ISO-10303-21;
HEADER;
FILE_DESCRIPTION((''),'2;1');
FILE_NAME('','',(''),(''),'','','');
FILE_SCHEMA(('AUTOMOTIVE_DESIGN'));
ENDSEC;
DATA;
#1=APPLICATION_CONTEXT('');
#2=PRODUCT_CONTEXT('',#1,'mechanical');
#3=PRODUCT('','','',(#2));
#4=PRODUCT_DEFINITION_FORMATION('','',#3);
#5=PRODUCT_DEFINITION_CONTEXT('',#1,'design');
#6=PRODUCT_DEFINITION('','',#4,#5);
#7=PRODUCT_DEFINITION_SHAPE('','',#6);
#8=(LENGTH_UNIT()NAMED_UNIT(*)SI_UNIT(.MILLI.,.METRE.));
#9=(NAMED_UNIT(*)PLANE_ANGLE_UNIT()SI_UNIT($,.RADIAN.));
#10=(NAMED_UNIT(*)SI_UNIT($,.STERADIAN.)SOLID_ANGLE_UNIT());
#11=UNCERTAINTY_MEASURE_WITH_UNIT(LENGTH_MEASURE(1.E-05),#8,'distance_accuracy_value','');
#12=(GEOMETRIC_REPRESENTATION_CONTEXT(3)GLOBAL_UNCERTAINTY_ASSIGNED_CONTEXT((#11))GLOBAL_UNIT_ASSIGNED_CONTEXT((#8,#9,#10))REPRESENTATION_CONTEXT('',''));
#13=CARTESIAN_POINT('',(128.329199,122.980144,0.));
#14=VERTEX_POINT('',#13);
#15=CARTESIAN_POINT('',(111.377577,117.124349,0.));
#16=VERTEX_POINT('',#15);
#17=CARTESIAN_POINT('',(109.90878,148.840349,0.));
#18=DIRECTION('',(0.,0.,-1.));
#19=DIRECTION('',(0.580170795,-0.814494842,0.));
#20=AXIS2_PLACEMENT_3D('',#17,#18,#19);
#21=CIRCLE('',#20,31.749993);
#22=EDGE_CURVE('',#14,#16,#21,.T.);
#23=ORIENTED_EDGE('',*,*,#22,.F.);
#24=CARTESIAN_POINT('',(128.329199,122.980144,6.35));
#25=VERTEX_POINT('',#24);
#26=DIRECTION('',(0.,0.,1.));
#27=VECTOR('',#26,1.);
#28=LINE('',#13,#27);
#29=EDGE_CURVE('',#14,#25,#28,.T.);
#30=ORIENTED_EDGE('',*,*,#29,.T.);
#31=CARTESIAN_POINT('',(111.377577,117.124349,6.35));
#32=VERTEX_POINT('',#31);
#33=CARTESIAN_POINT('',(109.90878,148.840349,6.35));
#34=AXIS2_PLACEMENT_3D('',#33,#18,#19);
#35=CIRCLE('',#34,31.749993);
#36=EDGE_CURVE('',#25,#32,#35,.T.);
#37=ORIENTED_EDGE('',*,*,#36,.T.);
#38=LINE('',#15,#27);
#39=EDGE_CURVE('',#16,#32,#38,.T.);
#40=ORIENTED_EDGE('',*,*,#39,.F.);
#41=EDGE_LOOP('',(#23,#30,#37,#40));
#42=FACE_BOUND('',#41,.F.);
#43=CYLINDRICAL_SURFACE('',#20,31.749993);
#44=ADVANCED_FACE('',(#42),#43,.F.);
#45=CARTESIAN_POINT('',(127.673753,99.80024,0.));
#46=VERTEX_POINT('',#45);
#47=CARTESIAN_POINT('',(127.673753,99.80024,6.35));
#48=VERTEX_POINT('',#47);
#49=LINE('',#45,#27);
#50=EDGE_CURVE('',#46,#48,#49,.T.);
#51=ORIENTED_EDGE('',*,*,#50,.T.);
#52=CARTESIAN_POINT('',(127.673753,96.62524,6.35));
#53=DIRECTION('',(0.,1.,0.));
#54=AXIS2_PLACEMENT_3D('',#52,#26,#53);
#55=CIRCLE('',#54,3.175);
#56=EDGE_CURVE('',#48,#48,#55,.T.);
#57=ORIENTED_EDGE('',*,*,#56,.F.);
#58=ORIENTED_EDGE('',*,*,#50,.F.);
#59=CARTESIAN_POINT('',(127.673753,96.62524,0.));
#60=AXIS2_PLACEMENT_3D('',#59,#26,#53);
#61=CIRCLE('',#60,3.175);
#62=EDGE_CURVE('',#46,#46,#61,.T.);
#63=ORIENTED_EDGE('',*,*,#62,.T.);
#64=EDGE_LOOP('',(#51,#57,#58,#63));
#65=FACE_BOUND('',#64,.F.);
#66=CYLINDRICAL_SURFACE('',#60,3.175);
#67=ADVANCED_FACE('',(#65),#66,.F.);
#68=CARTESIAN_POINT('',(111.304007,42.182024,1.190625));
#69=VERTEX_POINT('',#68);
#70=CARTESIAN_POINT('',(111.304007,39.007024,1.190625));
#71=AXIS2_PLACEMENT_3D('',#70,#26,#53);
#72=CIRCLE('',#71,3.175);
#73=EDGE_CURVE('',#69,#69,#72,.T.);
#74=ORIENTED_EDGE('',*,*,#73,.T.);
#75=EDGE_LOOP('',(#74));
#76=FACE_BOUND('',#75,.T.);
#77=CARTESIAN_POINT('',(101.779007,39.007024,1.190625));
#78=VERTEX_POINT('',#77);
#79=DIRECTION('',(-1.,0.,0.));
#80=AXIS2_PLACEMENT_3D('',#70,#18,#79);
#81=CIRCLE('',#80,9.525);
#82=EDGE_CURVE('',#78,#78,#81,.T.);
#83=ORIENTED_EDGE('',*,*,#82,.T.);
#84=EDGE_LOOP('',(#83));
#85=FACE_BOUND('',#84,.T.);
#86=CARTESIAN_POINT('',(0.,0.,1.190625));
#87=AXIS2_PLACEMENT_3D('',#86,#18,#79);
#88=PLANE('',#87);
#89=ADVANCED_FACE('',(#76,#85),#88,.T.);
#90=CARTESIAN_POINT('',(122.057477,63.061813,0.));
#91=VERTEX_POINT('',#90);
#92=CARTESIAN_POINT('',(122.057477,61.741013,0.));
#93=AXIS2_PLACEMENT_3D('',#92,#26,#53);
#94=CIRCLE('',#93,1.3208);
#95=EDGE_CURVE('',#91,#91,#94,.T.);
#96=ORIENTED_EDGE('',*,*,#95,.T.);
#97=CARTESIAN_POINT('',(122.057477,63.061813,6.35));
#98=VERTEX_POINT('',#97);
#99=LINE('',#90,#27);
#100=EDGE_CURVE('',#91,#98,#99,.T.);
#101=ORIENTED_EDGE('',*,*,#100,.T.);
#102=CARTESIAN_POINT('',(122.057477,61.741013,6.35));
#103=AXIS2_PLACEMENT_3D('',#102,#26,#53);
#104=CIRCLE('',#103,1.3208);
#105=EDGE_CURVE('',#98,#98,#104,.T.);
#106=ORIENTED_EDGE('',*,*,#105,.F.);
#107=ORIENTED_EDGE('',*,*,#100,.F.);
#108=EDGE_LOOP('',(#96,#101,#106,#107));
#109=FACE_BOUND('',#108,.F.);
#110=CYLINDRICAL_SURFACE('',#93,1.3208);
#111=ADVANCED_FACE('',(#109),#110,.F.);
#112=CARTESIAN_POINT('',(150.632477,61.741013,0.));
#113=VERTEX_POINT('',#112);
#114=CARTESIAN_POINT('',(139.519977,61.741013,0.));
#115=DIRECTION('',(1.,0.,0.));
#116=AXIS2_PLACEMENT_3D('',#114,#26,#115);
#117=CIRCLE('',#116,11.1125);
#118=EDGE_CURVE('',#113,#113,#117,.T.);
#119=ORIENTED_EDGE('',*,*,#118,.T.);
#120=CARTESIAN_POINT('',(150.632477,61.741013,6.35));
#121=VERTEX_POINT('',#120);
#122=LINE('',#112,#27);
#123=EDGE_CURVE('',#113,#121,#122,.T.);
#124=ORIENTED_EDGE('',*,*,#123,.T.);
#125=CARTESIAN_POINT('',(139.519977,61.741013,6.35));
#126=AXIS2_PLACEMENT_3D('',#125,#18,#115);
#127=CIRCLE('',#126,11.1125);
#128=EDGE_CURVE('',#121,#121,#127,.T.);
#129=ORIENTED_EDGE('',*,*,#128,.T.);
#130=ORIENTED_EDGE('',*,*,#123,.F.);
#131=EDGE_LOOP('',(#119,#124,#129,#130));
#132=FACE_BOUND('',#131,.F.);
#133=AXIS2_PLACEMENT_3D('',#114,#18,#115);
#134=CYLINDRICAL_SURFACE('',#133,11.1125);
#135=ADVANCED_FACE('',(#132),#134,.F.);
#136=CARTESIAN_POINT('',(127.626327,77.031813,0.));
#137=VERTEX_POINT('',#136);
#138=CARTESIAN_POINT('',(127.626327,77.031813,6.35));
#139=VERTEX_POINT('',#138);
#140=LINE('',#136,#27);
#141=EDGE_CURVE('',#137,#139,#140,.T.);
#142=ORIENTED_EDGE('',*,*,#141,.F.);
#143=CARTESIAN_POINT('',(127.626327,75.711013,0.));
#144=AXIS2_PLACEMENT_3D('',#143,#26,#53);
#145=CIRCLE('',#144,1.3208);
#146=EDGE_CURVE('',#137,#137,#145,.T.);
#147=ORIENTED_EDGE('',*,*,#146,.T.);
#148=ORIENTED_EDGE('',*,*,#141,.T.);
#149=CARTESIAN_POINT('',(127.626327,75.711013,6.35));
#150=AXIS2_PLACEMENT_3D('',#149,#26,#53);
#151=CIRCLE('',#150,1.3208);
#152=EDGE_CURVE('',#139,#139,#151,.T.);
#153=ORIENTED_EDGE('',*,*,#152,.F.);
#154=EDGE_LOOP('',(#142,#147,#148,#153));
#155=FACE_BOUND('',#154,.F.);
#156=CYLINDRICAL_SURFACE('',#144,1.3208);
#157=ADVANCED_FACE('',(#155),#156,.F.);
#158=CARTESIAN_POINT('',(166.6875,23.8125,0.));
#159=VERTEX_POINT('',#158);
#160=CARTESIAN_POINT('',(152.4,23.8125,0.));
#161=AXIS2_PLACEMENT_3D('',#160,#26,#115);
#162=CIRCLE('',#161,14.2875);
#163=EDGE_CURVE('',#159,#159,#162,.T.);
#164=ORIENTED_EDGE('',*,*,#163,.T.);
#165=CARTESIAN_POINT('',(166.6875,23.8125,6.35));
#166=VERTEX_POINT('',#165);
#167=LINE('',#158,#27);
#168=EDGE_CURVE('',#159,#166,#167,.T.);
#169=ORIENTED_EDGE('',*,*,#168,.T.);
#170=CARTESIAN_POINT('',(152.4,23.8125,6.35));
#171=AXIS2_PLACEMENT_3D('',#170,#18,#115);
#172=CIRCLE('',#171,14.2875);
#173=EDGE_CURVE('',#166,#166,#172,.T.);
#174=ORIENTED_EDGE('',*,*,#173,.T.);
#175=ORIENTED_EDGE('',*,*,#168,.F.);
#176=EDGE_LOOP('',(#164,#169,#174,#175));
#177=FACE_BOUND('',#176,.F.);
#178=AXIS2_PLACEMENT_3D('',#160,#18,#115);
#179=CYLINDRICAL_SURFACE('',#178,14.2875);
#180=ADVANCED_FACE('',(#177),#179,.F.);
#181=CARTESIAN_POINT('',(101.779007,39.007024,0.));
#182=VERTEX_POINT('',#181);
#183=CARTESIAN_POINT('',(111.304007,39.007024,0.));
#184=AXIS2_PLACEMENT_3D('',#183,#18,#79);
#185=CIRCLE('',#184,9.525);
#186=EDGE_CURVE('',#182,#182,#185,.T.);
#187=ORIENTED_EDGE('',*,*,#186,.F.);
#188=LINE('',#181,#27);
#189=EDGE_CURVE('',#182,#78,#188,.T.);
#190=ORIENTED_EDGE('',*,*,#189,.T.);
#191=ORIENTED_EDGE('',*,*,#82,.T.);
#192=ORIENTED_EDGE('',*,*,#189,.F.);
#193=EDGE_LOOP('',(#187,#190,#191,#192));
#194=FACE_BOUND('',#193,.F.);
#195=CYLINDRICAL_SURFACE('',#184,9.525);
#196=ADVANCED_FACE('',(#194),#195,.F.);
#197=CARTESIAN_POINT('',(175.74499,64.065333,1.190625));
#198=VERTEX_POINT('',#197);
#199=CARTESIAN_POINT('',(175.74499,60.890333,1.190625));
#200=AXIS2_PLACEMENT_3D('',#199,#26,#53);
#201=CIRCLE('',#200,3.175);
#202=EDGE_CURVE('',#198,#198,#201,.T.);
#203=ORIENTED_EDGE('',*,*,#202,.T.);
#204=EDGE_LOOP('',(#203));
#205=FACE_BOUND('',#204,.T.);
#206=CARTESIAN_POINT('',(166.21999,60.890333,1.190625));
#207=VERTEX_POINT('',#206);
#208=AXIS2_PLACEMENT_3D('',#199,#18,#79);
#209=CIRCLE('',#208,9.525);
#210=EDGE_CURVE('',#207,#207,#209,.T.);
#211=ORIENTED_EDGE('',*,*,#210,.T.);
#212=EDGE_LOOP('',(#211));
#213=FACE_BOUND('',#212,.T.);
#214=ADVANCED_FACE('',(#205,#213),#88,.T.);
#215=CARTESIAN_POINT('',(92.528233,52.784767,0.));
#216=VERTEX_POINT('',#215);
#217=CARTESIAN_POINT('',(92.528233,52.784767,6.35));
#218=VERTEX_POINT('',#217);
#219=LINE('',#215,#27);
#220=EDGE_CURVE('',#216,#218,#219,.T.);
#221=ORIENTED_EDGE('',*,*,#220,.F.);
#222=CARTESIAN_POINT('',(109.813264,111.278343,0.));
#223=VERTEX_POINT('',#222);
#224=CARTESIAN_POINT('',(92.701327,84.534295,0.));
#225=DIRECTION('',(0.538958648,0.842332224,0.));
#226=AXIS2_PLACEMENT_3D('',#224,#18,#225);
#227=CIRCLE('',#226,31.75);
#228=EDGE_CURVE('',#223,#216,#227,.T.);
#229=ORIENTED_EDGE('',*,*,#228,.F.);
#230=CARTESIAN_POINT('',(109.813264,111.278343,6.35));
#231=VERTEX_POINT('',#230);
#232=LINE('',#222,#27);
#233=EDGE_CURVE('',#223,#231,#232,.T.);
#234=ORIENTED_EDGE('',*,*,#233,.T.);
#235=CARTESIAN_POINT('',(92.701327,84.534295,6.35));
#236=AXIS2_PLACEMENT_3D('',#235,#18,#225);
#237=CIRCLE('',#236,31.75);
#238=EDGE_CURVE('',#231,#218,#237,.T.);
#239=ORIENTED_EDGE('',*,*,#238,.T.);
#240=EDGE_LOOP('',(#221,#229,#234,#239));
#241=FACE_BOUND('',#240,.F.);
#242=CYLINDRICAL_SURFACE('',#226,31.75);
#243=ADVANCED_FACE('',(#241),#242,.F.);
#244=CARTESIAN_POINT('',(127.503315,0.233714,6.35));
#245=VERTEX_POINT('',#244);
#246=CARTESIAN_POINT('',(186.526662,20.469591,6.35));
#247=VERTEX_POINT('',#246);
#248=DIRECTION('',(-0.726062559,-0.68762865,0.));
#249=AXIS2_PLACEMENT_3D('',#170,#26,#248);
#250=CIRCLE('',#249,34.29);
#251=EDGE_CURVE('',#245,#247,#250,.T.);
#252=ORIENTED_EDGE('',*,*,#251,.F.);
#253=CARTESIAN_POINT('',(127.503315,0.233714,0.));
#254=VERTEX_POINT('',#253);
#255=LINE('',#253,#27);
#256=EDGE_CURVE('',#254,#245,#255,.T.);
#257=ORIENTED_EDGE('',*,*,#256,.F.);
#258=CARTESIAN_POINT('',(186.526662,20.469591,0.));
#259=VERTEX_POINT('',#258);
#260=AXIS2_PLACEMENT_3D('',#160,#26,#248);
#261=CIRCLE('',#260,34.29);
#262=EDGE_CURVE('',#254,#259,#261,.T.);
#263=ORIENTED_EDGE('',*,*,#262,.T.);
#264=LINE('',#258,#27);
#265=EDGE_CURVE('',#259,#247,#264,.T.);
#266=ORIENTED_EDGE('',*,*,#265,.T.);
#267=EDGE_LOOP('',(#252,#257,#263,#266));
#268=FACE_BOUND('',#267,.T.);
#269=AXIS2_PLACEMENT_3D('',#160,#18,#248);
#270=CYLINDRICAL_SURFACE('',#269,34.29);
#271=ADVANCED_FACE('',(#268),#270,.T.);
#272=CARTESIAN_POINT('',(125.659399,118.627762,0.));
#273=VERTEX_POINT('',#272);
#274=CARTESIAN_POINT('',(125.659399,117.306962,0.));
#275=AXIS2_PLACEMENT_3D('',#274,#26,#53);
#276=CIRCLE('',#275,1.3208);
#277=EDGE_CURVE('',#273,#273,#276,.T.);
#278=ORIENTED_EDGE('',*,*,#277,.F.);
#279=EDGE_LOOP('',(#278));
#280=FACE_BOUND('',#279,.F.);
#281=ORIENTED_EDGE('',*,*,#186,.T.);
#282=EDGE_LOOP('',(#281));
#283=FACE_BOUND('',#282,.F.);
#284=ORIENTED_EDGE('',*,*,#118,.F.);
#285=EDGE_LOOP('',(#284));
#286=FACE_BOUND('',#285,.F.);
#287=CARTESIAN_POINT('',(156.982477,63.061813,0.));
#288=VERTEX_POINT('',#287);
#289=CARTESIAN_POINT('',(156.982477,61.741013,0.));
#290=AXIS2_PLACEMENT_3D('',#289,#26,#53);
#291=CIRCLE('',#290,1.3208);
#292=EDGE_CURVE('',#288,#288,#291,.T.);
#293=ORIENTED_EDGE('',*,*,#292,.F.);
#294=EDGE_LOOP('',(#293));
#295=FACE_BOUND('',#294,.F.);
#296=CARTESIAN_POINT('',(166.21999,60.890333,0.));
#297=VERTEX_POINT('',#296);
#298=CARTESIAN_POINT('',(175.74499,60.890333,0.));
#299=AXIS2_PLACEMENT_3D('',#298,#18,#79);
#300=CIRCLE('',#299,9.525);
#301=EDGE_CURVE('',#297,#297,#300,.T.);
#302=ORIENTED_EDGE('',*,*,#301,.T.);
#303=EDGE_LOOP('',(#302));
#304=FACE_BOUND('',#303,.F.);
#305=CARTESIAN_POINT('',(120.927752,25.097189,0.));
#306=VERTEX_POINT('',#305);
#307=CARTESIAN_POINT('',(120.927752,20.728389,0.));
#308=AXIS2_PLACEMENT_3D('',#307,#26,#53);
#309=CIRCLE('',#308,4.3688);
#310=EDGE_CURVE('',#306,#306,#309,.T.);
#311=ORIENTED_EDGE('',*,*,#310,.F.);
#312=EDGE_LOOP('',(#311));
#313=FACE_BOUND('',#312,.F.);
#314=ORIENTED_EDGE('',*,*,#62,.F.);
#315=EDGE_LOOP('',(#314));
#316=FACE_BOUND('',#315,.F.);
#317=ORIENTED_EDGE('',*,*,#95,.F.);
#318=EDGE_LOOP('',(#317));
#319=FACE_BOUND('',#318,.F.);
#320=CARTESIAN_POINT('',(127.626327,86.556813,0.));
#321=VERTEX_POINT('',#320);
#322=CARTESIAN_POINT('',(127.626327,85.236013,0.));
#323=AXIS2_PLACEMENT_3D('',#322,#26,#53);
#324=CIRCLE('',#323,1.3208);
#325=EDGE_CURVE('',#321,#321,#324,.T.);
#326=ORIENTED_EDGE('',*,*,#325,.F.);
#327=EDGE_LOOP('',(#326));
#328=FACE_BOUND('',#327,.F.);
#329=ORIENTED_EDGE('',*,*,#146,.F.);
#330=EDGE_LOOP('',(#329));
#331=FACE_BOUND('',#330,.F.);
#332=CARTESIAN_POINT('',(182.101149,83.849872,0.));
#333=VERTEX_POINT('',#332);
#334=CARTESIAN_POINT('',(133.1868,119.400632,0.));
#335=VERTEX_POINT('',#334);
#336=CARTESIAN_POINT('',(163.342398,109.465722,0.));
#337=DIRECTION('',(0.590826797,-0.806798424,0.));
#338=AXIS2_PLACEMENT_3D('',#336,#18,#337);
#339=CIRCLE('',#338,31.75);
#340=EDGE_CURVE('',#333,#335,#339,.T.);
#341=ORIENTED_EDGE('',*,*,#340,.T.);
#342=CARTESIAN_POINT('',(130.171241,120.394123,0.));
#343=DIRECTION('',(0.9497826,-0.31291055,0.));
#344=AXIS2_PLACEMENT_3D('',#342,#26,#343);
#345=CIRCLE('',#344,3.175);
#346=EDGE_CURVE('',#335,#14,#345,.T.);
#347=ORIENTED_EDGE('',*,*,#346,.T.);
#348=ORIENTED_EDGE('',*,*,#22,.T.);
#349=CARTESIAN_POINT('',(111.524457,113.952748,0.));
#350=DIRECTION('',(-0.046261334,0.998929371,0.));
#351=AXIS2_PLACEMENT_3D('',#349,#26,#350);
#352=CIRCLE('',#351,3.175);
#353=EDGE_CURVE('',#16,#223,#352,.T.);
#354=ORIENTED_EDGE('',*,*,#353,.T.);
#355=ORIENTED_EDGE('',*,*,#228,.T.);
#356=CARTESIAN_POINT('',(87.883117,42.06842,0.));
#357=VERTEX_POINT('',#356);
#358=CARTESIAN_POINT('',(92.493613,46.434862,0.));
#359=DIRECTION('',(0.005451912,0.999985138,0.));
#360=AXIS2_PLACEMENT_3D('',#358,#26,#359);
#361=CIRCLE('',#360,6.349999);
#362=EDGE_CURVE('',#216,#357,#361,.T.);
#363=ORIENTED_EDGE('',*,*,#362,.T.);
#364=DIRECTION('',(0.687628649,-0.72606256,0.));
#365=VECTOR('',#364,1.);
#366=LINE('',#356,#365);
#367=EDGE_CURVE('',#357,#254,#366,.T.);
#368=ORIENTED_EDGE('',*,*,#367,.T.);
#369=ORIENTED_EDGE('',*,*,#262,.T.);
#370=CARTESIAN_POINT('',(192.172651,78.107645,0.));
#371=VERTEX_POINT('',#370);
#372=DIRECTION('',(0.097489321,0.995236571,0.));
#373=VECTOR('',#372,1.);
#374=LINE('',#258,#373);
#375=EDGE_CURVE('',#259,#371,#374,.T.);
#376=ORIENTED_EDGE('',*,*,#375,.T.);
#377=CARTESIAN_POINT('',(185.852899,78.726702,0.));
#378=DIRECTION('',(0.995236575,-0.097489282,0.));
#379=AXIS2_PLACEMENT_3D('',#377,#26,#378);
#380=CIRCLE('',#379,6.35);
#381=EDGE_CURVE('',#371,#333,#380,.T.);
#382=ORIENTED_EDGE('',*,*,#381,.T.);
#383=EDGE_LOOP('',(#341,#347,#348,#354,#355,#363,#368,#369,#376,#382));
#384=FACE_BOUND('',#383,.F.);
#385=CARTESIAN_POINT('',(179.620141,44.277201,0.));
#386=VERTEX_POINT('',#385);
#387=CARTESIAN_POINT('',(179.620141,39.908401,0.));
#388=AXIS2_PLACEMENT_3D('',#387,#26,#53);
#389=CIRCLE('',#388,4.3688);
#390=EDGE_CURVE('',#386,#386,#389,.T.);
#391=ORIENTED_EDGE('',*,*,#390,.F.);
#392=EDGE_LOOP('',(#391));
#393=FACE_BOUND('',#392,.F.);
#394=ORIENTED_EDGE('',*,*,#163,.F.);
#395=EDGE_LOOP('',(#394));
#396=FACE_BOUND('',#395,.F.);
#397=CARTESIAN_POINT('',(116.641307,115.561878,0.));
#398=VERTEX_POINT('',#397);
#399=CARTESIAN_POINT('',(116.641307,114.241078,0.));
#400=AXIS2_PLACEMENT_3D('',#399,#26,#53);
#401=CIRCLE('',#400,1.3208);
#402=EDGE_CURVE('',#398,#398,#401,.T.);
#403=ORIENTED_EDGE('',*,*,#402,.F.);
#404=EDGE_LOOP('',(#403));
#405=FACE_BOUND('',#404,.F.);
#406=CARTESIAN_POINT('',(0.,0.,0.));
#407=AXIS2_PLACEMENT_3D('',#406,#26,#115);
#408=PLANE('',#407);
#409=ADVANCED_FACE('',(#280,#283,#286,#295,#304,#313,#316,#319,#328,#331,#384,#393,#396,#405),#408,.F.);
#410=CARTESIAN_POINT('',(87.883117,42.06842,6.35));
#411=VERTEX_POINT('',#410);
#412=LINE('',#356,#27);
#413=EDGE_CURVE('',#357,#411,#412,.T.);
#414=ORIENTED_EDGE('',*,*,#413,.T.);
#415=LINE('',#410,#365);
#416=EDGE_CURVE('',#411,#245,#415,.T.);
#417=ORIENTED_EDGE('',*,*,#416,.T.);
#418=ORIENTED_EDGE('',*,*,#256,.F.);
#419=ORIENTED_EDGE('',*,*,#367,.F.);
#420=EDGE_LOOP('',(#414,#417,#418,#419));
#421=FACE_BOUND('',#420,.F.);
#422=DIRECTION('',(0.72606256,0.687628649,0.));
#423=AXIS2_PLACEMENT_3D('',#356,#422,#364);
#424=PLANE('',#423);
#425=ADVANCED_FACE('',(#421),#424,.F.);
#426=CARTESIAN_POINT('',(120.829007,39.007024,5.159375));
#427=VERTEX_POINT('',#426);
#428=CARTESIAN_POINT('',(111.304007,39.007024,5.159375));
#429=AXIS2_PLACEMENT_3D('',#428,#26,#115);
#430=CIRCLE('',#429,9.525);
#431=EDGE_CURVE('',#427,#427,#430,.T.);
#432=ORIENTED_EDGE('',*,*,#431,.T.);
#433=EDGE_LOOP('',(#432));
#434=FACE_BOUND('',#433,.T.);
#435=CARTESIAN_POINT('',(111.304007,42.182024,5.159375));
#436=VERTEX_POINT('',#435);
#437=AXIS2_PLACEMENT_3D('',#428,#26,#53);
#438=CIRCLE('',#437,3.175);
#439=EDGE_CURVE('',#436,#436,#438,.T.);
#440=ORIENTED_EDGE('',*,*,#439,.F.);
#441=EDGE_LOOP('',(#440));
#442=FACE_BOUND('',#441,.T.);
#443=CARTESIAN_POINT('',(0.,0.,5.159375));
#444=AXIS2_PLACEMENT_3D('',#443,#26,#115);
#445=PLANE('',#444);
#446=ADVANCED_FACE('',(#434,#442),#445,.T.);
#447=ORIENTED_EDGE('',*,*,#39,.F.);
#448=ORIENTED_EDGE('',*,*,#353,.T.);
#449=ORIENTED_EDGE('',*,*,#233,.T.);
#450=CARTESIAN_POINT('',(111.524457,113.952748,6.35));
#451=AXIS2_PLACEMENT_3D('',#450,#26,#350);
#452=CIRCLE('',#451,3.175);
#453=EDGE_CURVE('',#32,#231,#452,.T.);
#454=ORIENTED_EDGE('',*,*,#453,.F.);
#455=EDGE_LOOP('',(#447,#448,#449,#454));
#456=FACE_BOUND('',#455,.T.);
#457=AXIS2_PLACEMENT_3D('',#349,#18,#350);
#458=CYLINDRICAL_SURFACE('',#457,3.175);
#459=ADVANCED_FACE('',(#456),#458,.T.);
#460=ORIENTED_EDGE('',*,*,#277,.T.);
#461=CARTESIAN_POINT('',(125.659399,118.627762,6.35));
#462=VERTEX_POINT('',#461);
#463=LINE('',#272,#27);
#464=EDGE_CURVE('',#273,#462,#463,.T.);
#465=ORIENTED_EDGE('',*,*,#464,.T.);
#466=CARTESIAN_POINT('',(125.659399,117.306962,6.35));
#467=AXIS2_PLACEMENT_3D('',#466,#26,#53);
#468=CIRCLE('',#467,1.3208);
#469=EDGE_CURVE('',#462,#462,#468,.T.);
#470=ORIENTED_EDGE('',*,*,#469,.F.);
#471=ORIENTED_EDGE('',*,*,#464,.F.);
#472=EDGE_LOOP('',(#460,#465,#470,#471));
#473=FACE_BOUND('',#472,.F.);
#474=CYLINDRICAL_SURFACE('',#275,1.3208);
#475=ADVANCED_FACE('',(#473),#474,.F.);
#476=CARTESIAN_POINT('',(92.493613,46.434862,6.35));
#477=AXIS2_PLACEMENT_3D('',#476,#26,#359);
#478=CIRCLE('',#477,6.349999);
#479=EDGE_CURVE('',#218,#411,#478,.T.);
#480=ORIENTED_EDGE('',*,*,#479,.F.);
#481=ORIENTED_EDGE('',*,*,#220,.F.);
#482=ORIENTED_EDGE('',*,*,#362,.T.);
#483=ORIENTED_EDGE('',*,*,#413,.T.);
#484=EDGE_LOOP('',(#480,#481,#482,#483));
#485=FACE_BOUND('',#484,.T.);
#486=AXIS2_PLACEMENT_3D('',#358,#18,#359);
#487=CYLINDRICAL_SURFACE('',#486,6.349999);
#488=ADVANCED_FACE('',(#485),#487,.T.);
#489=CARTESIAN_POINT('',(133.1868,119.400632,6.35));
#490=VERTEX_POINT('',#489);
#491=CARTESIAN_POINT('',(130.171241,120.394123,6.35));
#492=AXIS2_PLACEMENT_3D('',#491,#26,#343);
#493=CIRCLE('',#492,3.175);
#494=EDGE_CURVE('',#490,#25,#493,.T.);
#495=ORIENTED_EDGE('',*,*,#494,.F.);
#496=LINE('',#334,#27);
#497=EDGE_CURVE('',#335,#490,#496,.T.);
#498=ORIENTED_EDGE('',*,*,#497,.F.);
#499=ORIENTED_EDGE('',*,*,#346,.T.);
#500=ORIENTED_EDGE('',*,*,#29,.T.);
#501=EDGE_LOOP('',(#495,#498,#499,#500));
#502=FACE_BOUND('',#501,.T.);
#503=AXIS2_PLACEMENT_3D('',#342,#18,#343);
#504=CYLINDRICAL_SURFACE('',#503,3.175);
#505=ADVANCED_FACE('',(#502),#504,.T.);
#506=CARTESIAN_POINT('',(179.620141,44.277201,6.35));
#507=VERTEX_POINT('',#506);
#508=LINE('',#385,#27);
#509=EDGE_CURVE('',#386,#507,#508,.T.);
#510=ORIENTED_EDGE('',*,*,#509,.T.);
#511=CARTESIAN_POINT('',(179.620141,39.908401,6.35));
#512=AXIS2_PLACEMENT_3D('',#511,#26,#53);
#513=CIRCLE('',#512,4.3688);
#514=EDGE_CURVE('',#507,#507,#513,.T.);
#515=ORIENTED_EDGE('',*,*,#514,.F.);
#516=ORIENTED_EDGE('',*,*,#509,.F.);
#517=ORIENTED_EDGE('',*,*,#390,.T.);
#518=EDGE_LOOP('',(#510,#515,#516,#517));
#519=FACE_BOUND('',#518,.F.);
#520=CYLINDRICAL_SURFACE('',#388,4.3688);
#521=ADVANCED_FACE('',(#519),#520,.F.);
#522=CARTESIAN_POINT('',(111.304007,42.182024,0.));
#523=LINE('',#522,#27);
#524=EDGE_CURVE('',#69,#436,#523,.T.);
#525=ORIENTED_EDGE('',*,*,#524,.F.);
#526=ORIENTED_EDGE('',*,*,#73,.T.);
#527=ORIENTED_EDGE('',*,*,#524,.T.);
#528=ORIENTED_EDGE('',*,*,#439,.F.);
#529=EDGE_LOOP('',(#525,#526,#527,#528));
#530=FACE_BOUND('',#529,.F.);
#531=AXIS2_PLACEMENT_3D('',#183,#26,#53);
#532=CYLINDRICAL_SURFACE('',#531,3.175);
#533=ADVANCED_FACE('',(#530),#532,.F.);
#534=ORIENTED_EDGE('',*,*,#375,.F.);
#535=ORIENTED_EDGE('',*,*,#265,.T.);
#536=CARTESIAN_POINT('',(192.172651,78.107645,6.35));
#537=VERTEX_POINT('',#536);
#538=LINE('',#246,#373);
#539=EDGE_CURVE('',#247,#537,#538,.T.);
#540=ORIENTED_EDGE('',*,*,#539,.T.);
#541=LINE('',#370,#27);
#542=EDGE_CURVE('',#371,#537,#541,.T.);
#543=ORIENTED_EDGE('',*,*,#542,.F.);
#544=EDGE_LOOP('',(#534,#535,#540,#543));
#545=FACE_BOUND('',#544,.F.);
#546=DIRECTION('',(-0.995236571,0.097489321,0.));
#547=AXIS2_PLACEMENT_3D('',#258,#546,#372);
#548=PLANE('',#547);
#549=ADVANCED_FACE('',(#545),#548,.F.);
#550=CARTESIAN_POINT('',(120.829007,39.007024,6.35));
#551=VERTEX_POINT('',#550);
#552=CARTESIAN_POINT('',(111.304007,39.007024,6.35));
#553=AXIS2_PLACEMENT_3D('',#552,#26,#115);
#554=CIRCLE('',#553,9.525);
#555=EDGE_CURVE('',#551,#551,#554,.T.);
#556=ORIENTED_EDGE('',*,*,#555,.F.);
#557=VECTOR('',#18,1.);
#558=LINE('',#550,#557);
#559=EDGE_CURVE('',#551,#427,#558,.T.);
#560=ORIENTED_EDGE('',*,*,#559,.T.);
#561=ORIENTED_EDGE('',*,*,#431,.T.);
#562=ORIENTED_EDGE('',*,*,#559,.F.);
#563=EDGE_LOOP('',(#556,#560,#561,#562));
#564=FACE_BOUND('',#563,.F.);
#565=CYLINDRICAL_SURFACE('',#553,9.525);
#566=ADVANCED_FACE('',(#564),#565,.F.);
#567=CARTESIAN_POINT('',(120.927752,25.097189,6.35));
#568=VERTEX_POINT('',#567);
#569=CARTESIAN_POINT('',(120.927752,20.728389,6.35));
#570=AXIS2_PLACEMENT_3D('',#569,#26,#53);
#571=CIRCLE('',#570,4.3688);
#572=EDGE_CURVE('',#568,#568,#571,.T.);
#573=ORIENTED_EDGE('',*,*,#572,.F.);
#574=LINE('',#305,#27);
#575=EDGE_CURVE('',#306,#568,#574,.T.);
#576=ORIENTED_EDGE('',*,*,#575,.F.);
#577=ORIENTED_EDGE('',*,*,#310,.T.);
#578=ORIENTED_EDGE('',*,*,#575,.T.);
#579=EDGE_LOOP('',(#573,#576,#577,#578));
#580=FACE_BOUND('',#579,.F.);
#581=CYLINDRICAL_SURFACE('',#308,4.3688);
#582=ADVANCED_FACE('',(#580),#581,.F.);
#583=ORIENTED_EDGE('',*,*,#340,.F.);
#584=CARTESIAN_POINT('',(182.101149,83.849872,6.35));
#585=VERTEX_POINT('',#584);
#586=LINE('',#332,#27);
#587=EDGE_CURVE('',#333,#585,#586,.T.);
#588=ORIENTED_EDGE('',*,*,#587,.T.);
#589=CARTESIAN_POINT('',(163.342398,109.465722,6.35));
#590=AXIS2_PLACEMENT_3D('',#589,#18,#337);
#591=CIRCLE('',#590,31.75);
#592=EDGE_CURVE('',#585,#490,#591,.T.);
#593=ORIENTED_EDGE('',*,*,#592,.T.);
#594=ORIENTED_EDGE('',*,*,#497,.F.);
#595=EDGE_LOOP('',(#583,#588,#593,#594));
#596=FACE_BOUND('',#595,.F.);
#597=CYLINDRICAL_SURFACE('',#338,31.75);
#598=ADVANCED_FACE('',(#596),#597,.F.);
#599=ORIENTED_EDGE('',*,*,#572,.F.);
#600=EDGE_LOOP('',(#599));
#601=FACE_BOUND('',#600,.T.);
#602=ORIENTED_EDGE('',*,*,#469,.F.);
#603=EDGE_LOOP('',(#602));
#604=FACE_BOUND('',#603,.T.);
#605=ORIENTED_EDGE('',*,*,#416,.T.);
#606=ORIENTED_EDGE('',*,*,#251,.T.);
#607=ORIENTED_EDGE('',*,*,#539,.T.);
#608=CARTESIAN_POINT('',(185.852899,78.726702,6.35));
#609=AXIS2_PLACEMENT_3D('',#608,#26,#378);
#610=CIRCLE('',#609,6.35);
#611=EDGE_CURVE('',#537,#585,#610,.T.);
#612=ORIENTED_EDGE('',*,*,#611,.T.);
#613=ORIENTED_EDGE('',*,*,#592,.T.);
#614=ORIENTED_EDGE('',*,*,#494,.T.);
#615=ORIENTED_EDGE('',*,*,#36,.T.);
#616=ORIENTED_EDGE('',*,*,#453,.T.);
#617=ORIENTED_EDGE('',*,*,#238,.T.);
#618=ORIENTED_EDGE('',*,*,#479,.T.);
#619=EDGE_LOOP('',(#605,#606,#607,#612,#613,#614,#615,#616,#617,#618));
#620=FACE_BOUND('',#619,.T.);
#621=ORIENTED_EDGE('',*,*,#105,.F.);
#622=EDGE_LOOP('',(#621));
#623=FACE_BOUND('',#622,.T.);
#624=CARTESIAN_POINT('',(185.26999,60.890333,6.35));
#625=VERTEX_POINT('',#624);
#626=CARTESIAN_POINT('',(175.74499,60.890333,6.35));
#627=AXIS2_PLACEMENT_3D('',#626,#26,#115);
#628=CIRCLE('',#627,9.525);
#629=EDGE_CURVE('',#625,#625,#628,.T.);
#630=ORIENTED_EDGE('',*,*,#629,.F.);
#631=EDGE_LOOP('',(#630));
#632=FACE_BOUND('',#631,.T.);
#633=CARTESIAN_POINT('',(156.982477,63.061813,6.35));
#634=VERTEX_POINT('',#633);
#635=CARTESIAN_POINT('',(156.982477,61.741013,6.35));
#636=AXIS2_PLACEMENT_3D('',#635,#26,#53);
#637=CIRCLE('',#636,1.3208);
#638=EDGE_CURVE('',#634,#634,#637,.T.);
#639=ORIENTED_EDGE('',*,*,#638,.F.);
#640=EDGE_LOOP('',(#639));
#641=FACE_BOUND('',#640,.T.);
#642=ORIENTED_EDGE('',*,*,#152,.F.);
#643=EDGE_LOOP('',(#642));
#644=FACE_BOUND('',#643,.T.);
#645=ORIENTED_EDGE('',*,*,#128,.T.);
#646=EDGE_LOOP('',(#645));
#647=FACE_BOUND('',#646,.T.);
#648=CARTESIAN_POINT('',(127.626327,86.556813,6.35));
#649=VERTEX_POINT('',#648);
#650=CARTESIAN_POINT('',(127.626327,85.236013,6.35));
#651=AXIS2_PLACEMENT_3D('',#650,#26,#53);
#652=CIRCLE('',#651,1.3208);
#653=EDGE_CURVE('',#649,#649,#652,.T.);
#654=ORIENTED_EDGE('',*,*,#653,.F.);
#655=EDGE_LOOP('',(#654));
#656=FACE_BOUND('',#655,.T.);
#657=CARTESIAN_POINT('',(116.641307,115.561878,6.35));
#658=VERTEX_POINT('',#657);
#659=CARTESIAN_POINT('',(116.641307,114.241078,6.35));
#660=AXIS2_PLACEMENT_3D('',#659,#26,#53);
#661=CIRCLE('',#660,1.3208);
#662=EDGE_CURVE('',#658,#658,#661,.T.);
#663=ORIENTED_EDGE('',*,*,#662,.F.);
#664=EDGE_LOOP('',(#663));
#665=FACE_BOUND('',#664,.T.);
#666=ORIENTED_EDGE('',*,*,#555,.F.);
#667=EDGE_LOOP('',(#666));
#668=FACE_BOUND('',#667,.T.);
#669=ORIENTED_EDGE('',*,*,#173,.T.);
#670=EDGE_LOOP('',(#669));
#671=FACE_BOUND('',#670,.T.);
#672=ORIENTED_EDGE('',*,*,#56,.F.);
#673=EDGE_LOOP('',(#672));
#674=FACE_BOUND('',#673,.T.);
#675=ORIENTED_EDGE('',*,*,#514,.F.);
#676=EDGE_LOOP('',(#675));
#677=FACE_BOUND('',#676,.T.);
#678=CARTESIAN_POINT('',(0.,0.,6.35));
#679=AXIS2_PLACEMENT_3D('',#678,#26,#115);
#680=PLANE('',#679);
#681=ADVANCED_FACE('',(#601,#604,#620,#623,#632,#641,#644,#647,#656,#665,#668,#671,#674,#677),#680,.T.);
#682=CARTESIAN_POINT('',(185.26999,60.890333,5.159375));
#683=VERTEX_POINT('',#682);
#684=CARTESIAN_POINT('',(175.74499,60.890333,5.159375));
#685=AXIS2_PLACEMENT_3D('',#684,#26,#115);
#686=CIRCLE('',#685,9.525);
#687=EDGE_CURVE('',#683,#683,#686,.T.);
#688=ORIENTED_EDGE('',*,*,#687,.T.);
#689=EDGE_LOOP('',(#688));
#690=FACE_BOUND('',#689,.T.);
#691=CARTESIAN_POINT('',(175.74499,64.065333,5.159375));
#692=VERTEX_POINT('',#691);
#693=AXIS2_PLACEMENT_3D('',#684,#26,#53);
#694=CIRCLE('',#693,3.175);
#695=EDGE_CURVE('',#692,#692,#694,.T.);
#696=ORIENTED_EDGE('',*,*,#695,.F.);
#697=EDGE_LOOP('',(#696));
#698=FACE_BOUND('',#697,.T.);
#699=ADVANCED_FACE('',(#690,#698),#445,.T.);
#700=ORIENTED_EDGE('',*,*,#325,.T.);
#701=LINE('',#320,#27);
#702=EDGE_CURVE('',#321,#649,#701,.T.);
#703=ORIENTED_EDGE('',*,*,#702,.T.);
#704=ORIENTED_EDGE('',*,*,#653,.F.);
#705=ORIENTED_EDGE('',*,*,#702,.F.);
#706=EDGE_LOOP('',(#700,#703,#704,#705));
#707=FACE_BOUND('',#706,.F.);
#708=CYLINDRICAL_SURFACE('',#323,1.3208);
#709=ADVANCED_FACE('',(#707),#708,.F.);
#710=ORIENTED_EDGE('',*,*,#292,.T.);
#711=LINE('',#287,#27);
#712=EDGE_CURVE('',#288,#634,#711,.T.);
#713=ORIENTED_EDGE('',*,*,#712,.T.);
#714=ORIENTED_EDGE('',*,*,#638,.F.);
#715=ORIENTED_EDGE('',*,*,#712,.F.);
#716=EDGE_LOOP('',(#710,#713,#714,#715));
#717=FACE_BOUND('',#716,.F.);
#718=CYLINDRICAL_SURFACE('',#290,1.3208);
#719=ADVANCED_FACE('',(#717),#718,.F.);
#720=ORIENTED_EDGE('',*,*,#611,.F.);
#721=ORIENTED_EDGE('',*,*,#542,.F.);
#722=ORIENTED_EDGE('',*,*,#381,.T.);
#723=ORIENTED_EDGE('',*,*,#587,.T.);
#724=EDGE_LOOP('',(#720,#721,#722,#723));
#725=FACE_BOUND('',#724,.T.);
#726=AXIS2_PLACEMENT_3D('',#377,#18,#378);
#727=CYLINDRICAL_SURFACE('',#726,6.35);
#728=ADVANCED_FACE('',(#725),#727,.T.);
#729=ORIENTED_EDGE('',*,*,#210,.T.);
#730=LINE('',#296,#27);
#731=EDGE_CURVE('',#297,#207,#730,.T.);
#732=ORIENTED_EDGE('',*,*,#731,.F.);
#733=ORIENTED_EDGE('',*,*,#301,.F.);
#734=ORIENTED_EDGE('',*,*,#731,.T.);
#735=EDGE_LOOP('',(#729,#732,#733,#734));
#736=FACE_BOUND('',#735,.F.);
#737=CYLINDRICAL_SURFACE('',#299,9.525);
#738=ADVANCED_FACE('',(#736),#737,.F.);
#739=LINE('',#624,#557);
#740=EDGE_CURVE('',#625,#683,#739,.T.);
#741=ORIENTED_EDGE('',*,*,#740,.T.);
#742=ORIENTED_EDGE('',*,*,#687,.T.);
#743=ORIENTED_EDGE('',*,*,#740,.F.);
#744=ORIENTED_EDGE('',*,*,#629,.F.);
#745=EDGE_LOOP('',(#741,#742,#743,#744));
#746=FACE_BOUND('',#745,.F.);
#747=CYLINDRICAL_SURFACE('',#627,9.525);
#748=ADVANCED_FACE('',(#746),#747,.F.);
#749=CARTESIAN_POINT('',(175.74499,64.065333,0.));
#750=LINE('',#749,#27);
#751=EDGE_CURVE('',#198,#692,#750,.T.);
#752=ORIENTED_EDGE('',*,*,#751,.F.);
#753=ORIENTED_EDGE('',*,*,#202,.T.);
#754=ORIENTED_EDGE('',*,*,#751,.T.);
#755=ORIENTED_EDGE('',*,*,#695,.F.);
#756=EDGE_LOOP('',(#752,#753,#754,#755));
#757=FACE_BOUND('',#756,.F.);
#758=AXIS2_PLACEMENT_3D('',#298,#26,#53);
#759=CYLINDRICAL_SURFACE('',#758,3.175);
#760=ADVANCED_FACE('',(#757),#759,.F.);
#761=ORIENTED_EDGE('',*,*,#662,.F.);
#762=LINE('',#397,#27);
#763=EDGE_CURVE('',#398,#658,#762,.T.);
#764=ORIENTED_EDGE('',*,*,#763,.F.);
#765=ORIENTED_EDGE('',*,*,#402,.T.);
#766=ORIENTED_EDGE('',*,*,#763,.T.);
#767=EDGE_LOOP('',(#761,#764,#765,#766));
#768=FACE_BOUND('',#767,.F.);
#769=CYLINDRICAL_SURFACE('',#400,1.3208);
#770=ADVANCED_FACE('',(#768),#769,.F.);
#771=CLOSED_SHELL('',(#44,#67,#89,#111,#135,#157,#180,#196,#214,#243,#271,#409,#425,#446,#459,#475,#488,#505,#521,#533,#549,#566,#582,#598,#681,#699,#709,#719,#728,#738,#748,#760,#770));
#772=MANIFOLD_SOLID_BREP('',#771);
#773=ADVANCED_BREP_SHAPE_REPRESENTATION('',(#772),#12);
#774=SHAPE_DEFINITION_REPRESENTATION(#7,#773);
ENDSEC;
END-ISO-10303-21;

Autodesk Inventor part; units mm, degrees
ref_plane "YZ Plane" through (0, 0, 0) normal (1, 0, 0) x (0, 1, 0)
ref_plane "XZ Plane" through (0, 0, 0) normal (0, 1, 0) x (-1, 0, 0)
ref_plane "XY Plane" through (0, 0, 0) normal (0, 0, 1) x (1, 0, 0)
sketch "Sketch1" plane through (0, 0, 0) normal (0, 0, 1) x (1, 0, 0)
  line L0 (0, 0) -> (304.8, 0) construction
  line L1 (304.8, 0) -> (304.8, 50.8) construction
  line L2 (304.8, 50.8) -> (0, 50.8) construction
  line L3 (0, 50.8) -> (0, 0) construction
  circle A0 centre (152.4, 23.8125) radius 14.2875
  arc A1 (186.526662, 20.469591) -> (127.726757, 0) centre (152.4, 23.8125) ccw
  circle A2 centre (152.4, 23.8125) radius 26.035 construction
  line L4 (152.4, 23.8125) -> (139.519977, 61.741013) construction
  circle A3 centre (139.519977, 61.741013) radius 9.525 construction
  circle A4 centre (139.519977, 61.741013) radius 17.78 construction
  circle A5 centre (91.561866, 85.09) radius 31.75 construction
  arc A6 (133.1868, 119.400632) -> (182.101149, 83.849872) centre (163.342398, 109.465722) ccw
  circle A7 centre (109.531215, 150.050573) radius 31.75 construction
  line L5 (0, 50.8) -> (0, 53.34) construction
  line L6 (0, 53.34) -> (304.8, 53.34) construction
  line L7 (304.8, 53.34) -> (304.8, 50.8) construction
  circle A8 centre (139.519977, 61.741013) radius 21.59 construction
  circle A9 centre (152.4, 23.8125) radius 46.99 construction
  circle A10 centre (152.4, 23.8125) radius 50.8 construction
  arc A11 (86.386473, 79.456368) -> (92.43632, 92.689857) centre (91.561866, 85.09) ccw construction
  circle A12 centre (163.342398, 109.465722) radius 7.65 construction
  arc A13 (116.774938, 152.510446) -> (102.287492, 147.5907) centre (109.531215, 150.050573) ccw construction
  circle A14 centre (139.519977, 61.741013) radius 22.9 construction
  line L8 (86.386473, 79.456368) -> (124.027623, 44.87694) construction
  line L9 (170.878164, 108.148633) -> (162.078023, 57.798354) construction
  line L10 (92.43632, 92.689857) -> (91.561866, 85.09) construction
  line L11 (91.561866, 85.09) -> (86.386473, 79.456368) construction
  circle A15 centre (127.673753, 96.62524) radius 3.175 construction
  circle A16 centre (127.673753, 96.62524) radius 7.9375 construction
  line L12 (92.43632, 92.689857) -> (126.766436, 88.739767) construction
  line L13 (133.195304, 90.922926) -> (158.02084, 114.961496) construction
  line L14 (158.02084, 114.961496) -> (163.342398, 109.465722) construction
  line L15 (170.878164, 108.148633) -> (163.342398, 109.465722) construction
  line L16 (139.519977, 61.741013) -> (127.673753, 96.62524) construction
  line L17 (91.561866, 85.09) -> (163.342398, 109.465722) construction
  line L18 (152.4, 23.8125) -> (91.561866, 85.09) construction
  line L19 (152.4, 23.8125) -> (163.342398, 109.465722) construction
  circle A17 centre (127.673753, 96.62524) radius 9.2075 construction
  circle A18 centre (127.673753, 96.62524) radius 6.1595 construction
  arc A19 (92.43632, 92.689857) -> (86.386473, 79.456368) centre (91.561866, 85.09) ccw construction
  circle A20 centre (163.342398, 109.465722) radius 25.4 construction
  circle A21 centre (109.531215, 150.050573) radius 25.4 construction
  line L20 (104.762695, 113.965606) -> (78.361037, 56.214394) construction
  circle A22 centre (91.561866, 85.09) radius 25.4 construction
  line L21 (139.595033, 160.25985) -> (79.467396, 139.841297) construction
  circle A23 centre (139.519977, 61.741013) radius 11.1125
  arc A24 (100.13733, 146.057474) -> (119.680223, 151.623238) centre (109.908777, 148.840356) ccw construction
  line L22 (109.093738, 151.240444) -> (85.48016, 141.883152) construction
  line L23 (109.908777, 148.840356) -> (85.48016, 141.883152) construction
  line L24 (109.093738, 151.240444) -> (132.707317, 160.597736) construction
  line L25 (109.908777, 148.840356) -> (134.337393, 155.79756) construction
  arc A25 (134.92109, 161.474983) -> (130.493544, 159.72049) centre (132.707317, 160.597736) ccw construction
  arc A26 (132.04721, 155.145323) -> (136.627576, 156.449798) centre (134.337393, 155.79756) ccw construction
  arc A27 (132.04721, 155.145323) -> (130.493544, 159.72049) centre (85.48016, 141.883152) ccw construction
  arc A28 (136.627576, 156.449798) -> (134.92109, 161.474983) centre (85.48016, 141.883152) ccw construction
  line L26 (132.707317, 160.597736) -> (134.92109, 161.474983) construction
  line L27 (134.337393, 155.79756) -> (136.627576, 156.449798) construction
  arc A29 (119.680223, 151.623238) -> (118.53917, 154.983361) centre (85.48016, 141.883152) ccw construction
  arc A30 (100.13733, 146.057474) -> (99.648307, 147.497527) centre (85.48016, 141.883152) ccw construction
  line L28 (104.40145, 107.079075) -> (92.701327, 84.534295) construction
  line L29 (81.001203, 61.989515) -> (90.396097, 85.588158) construction
  arc A31 (100.671763, 111.399174) -> (98.91022, 106.974429) centre (99.790992, 109.186802) ccw construction
  arc A32 (103.304563, 104.965502) -> (105.498337, 109.192648) centre (104.40145, 107.079075) ccw construction
  arc A33 (103.304563, 104.965502) -> (98.91022, 106.974429) centre (81.001203, 61.989515) ccw construction
  line L30 (99.790992, 109.186802) -> (100.671763, 111.399174) construction
  line L31 (104.40145, 107.079075) -> (105.498337, 109.192648) construction
  arc A34 (105.498337, 109.192648) -> (100.671763, 111.399174) centre (81.001203, 61.989515) ccw construction
  arc A35 (118.53917, 154.983361) -> (99.648307, 147.497527) centre (109.093738, 151.240444) ccw construction
  arc A36 (88.021276, 75.516384) -> (97.381374, 93.552208) centre (92.701327, 84.534295) ccw construction
  line L32 (90.396097, 85.588158) -> (99.790992, 109.186802) construction
  line L33 (92.701327, 84.534295) -> (81.001203, 61.989515) construction
  arc A37 (88.021276, 75.516384) -> (86.63814, 76.148701) centre (81.001203, 61.989515) ccw construction
  arc A38 (97.381374, 93.552208) -> (94.154055, 95.027616) centre (81.001203, 61.989515) ccw construction
  arc A39 (94.154055, 95.027616) -> (86.63814, 76.148701) centre (90.396097, 85.588158) ccw construction
  line L34 (163.342398, 109.465722) -> (140.898549, 121.35831) construction
  line L35 (163.342398, 109.465722) -> (185.786247, 97.573135) construction
  circle A40 centre (139.519977, 61.741013) radius 22.9 construction
  arc A41 (102.287492, 147.5907) -> (116.774938, 152.510446) centre (109.531215, 150.050573) ccw construction
  arc A42 (102.287492, 147.5907) -> (102.622578, 146.765267) centre (109.531215, 150.050573) ccw construction
  circle A43 centre (90.396097, 85.588158) radius 31.75
  arc A44 (107.326481, 112.71527) -> (92.528233, 52.784767) centre (92.701327, 84.534295) ccw
  line L36 (100.671763, 111.399174) -> (102.139715, 115.086462) construction
  line L37 (105.498337, 109.192648) -> (107.326481, 112.71527) construction
  arc A45 (107.326481, 112.71527) -> (102.139715, 115.086462) centre (81.001203, 61.989515) ccw
  circle A46 centre (109.093738, 151.240444) radius 31.75
  arc A47 (120.148005, 118.786726) -> (128.329199, 122.980144) centre (109.908777, 148.840356) ccw
  line L38 (134.92109, 161.474983) -> (138.610711, 162.93706) construction
  line L39 (136.627576, 156.449798) -> (140.444547, 157.536861) construction
  arc A48 (140.444547, 157.536861) -> (138.610711, 162.93706) centre (85.48016, 141.883152) ccw
  line L40 (91.561866, 85.09) -> (109.531215, 150.050573) construction
  line L41 (109.531215, 150.050573) -> (163.342398, 109.465722) construction
  line L42 (139.519977, 61.741013) -> (109.531215, 150.050573) construction
  circle A49 centre (139.519977, 61.741013) radius 17.4625
  line L43 (139.519977, 61.741013) -> (122.057477, 61.741013) construction
  line L44 (139.519977, 61.741013) -> (156.982477, 61.741013) construction
  line L45 (139.519977, 61.741013) -> (156.982477, 61.741013) construction
  circle A50 centre (139.519977, 61.741013) radius 26.71 construction
  circle A51 centre (111.304007, 39.007024) radius 9.525 construction
  circle A52 centre (175.74499, 60.890333) radius 9.525 construction
  line L46 (0, 3.81) -> (304.8, 3.81) construction
  arc A53 (86.506583, 75.488588) -> (95.723262, 93.598122) centre (91.114923, 84.543355) ccw
  arc A54 (92.484334, 95.047874) -> (85.118472, 76.10991) centre (88.801403, 85.578892) ccw
  arc A55 (95.723262, 93.598122) -> (92.484334, 95.047874) centre (79.594076, 61.906436) ccw
  circle A56 centre (120.927752, 20.728389) radius 5.588
  circle A57 centre (179.620141, 39.908401) radius 5.588
  line L47 (152.4, 23.8125) -> (304.8, 25.4) construction
  line L48 (179.620141, 39.908401) -> (152.4, 23.8125) construction
  line L49 (152.4, 23.8125) -> (120.927752, 20.728389) construction
  line L50 (67.343611, 63.755949) -> (87.883117, 42.06842)
  line L51 (186.526662, 20.469591) -> (192.172651, 78.107645)
  arc A58 (109.813264, 111.278343) -> (111.377577, 117.124349) centre (111.524457, 113.952748) ccw
  arc A59 (128.329199, 122.980144) -> (133.1868, 119.400632) centre (130.171241, 120.394123) ccw
  arc A60 (111.377577, 117.124349) -> (120.148005, 118.786726) centre (109.908777, 148.840356) ccw
  arc A61 (128.329199, 122.980144) -> (111.377577, 117.124349) centre (109.908777, 148.840356) ccw
  arc A62 (137.993696, 128.583928) -> (133.1868, 119.400632) centre (163.342398, 109.465722) ccw
  arc A63 (109.813264, 111.278343) -> (107.326481, 112.71527) centre (92.701327, 84.534295) ccw
  arc A64 (92.528233, 52.784767) -> (87.883117, 42.06842) centre (92.493614, 46.434861) ccw
  arc A65 (182.101149, 83.849872) -> (192.172651, 78.107645) centre (185.852899, 78.726702) ccw
  arc A66 (192.172651, 78.107645) -> (182.101149, 83.849872) centre (185.852899, 78.726702) ccw
  arc A67 (97.105346, 50.8) -> (92.528233, 52.784767) centre (92.493614, 46.434861) ccw
  arc A68 (87.883117, 42.06842) -> (97.105346, 50.8) centre (92.493614, 46.434861) ccw
  line L52 (87.883117, 42.06842) -> (127.503315, 0.233714)
  line L53 (192.172651, 78.107645) -> (194.941159, 106.370436)
  arc A69 (182.101149, 83.849872) -> (137.993696, 128.583928) centre (163.342398, 109.465722) ccw
  arc A70 (180.251465, 3.81) -> (186.526662, 20.469591) centre (152.4, 23.8125) ccw
  arc A71 (127.726757, 0) -> (180.251465, 3.81) centre (152.4, 23.8125) ccw
  arc A72 (92.528233, 52.784767) -> (109.813264, 111.278343) centre (92.701327, 84.534295) ccw
  arc A73 (133.1868, 119.400632) -> (128.329199, 122.980144) centre (130.171241, 120.394123) ccw
  arc A74 (111.377577, 117.124349) -> (109.813264, 111.278343) centre (111.524457, 113.952748) ccw
  point P0 (133.582269, 158.217994)
  point P1 (102.122529, 108.190485)
  dimension "d122" = 63.5
  dimension "d1" = 50.8
  dimension "d2" = 28.575
  dimension "d3" = 23.8125
  dimension "d4" = 152.4
  dimension "d7" = 68.58
  dimension "d8" = 52.07
  dimension "d9" = 19.05
  dimension "d10" = 35.56
  dimension "d11" = 40.0558
  dimension "d12" = 63.5
  dimension "d13" = 63.5
  dimension "d14" = 63.5
  dimension "d15" = 2.54
  dimension "d16" = 304.8
  dimension "d17" = 43.18
  dimension "d18" = 93.98
  dimension "d19" = 101.6
  dimension "d21" = 15.3
  dimension "d22" = 15.3
  dimension "d29" = 45.8
  dimension "d30" = 143.991
  dimension "d31" = 6.35
  dimension "d32" = 15.875
  dimension "d33" = 143.991
  dimension "d35" = 18.415
  dimension "d37" = 12.319
  dimension "d40" = 50.8
  dimension "d41" = 50.8
  dimension "d42" = 18.0044
  dimension "d43" = 18.0044
  dimension "d44" = 50.8
  dimension "d57" = 22.225
  dimension "d67" = 25.4
  dimension "d68" = 25.4
  dimension "d69" = 2.86
  dimension "d70" = 25.4
  dimension "d71" = 25.4
  dimension "d72" = 4.7625
  dimension "d75" = 2.86
  dimension "d80" = 4.7625
  dimension "d82" = 4.7625
  dimension "d83" = 50.8
  dimension "d84" = 50.8
  dimension "d85" = 10.16
  dimension "d97" = 48.41875
  dimension "d99" = 20.32
  dimension "d101" = 25.4
  dimension "d102" = 25.4
  dimension "d103" = 10.16
  dimension "d105" = 18.0044
  dimension "d106" = 18.0044
  dimension "d107" = 45.8
  dimension "d109" = 7.65
  dimension "d114" = 63.5
  dimension "d115" = 63.5
  dimension "d116" = 57.15
  dimension "d123" = 63.5
  dimension "d128" = 93.26256
  dimension "d129" = 34.925
  dimension "d130" = 0
  dimension "d138" = 53.42
  dimension "d139" = 19.05
  dimension "d140" = 19.05
  dimension "d154" = 3.81
sketch "Sketch1 outline for Plates" plane through (0, 0, 0) normal (0, 0, 1) x (1, 0, 0)
  arc A0 (111.377577, 117.124349) -> (109.813264, 111.278343) centre (111.524457, 113.952748) ccw
  arc A1 (109.813264, 111.278343) -> (92.528233, 52.784767) centre (92.701327, 84.534295) cw
  arc A2 (92.528233, 52.784767) -> (87.883117, 42.06842) centre (92.493614, 46.434861) ccw
  line L0 (87.883117, 42.06842) -> (127.503315, 0.233714)
  arc A3 (127.503315, 0.233714) -> (186.526662, 20.469591) centre (152.4, 23.8125) ccw
  line L1 (186.526662, 20.469591) -> (192.172651, 78.107645)
  arc A4 (192.172651, 78.107645) -> (182.101149, 83.849872) centre (185.852899, 78.726702) ccw
  arc A5 (182.101149, 83.849872) -> (133.1868, 119.400632) centre (163.342398, 109.465722) cw
  arc A6 (133.1868, 119.400632) -> (128.329199, 122.980144) centre (130.171241, 120.394123) ccw
  arc A7 (128.329199, 122.980144) -> (111.377577, 117.124349) centre (109.908777, 148.840356) cw
extrude "Plates" add sketch "Sketch1 outline for Plates" along normal blind 6.35
sketch "Sketch1 outline for Bearing Cuts" plane through (0, 0, 0) normal (0, 0, 1) x (1, 0, 0)
  circle A0 centre (139.519977, 61.741013) radius 11.1125
  circle A1 centre (152.4, 23.8125) radius 14.2875
extrude "Bearing Cuts" cut sketch "Sketch1 outline for Bearing Cuts" along normal blind 25.4
hole "Encoder Mounting Holes" at (122.057477, 61.741013, 0) at (156.982477, 61.741013, 0) direction (0, 0, 1) diameter 2.6416 end through all thread size "6-32 UNC" class "2B" standard "ANSI Unified Screw Threads"
hole "10-32 Pem Nut Holes" at (81.001203, 61.989515, 0) at (85.48016, 141.883152, 0) at (100.671763, 111.399174, 0) at (105.498337, 109.192648, 0) at (102.122529, 108.190485, 0) at (127.673753, 96.62524, 0) at (111.304007, 39.007024, 0) at (175.74499, 60.890333, 0) direction (0, 0, 1) diameter 6.35 end through all
hole "1/4-20 Pem Nut Holes" at (185.786247, 97.573135, 0) at (140.898549, 121.35831, 0) at (120.927752, 20.728389, 0) at (179.620141, 39.908401, 0) at (133.582269, 158.217994, 0) direction (0, 0, 1) diameter 8.7376 end through all
sketch "Sketch5" plane through (0, 0, 0) normal (0, 0, -1) x (-1, 0, 0)
  line L0 (-124.451327, 85.236013) -> (-124.451327, 75.711013)
  line L1 (-124.451327, 85.236013) -> (-127.626327, 85.236013)
  line L2 (-127.626327, 85.236013) -> (-127.626327, 75.711013)
  line L3 (-127.626327, 75.711013) -> (-124.451327, 75.711013)
  line L4 (-139.519977, 61.741013) -> (-109.908777, 148.840356) construction
  line L5 (-124.637437, 120.312993) -> (-115.619346, 117.247108) construction
  line L6 (-124.637437, 120.312993) -> (-125.659399, 117.306962) construction
  line L7 (-125.659399, 117.306962) -> (-116.641307, 114.241078) construction
  line L8 (-116.641307, 114.241078) -> (-115.619346, 117.247108) construction
  circle A0 centre (-139.519977, 61.741013) radius 11.1125
  arc A1 (-128.329199, 122.980144) -> (-111.377577, 117.124349) centre (-109.908777, 148.840356) ccw
  arc A2 (-109.813264, 111.278343) -> (-92.528233, 52.784767) centre (-92.701327, 84.534295) ccw
  dimension "d196" = 9.525
  dimension "d198" = 3.175
  dimension "d201" = 13.97
  dimension "d209" = 9.525
  dimension "d210" = 3.175
hole "Cim Adjustment Block Holes" at (127.626327, 85.236013, 0) at (127.626327, 75.711013, 0) at (125.659399, 117.306962, 0) at (116.641307, 114.241078, 0) direction (0, 0, 1) diameter 2.6416 end through all thread size "6-32 UNC" class "2B" standard "ANSI Unified Screw Threads"
sketch "Sketch8" plane through (0, 0, 6.35) normal (0, 0, 1) x (1, 0, 0)
  circle A0 centre (111.304007, 39.007024) radius 3.175
  circle A1 centre (175.74499, 60.890333) radius 3.175
  circle A2 centre (111.304007, 39.007024) radius 9.525
  circle A3 centre (175.74499, 60.890333) radius 9.525
  point P0 (0, 0)
  dimension "d235" = 19.05
  dimension "d236" = 19.05
extrude "Extrusion5" cut sketch "Sketch8" against normal blind 1.190625
sketch "Sketch9" plane through (0, 0, 0) normal (0, 0, -1) x (-1, 0, 0)
  circle A0 centre (-111.304007, 39.007024) radius 3.175
  circle A1 centre (-175.74499, 60.890333) radius 3.175
  circle A2 centre (-175.74499, 60.890333) radius 9.525
  circle A3 centre (-125.659399, 117.306962) radius 1.3208
  circle A4 centre (-127.626327, 85.236013) radius 1.3208
  circle A5 centre (-127.626327, 75.711013) radius 1.3208
  circle A6 centre (-116.641307, 114.241078) radius 1.3208
  circle A7 centre (-179.620141, 39.908401) radius 4.3688
  circle A8 centre (-120.927752, 20.728389) radius 4.3688
  circle A9 centre (-111.304007, 39.007024) radius 3.175
  circle A10 centre (-127.673753, 96.62524) radius 3.175
  circle A11 centre (-175.74499, 60.890333) radius 3.175
  circle A12 centre (-122.057477, 61.741013) radius 1.3208
  circle A13 centre (-156.982477, 61.741013) radius 1.3208
  circle A14 centre (-152.4, 23.8125) radius 14.2875
  circle A15 centre (-139.519977, 61.741013) radius 11.1125
  arc A16 (-182.101149, 83.849872) -> (-192.172651, 78.107645) centre (-185.852899, 78.726702) ccw
  line L0 (-186.526662, 20.469591) -> (-192.172651, 78.107645)
  arc A17 (-186.526662, 20.469591) -> (-127.503315, 0.233714) centre (-152.4, 23.8125) ccw
  line L1 (-87.883117, 42.06842) -> (-127.503315, 0.233714)
  arc A18 (-87.883117, 42.06842) -> (-92.528233, 52.784767) centre (-92.493614, 46.434861) ccw
  arc A19 (-109.813264, 111.278343) -> (-92.528233, 52.784767) centre (-92.701327, 84.534295) ccw
  arc A20 (-109.813264, 111.278343) -> (-111.377577, 117.124349) centre (-111.524457, 113.952748) ccw
  arc A21 (-128.329199, 122.980144) -> (-111.377577, 117.124349) centre (-109.908777, 148.840356) ccw
  arc A22 (-128.329199, 122.980144) -> (-133.1868, 119.400632) centre (-130.171241, 120.394123) ccw
  arc A23 (-182.101149, 83.849872) -> (-133.1868, 119.400632) centre (-163.342398, 109.465722) ccw
  circle A24 centre (-111.304007, 39.007024) radius 9.525
  point P0 (0, 0)
extrude "Extrusion6" cut sketch "Sketch9" against normal blind 1.190625 contours A2 | A24
equation "\"d9\" = Gear15tPD"
equation "\"d10\" = Gear28tPD"
equation "\"d11\" = 0.5 * Gear48tPD + 0.5 * Gear15tPD + MeshingClearance"
equation "\"d12\" = CimOD"
equation "\"d13\" = CimOD"
equation "\"d14\" = CimOD"
equation "\"d17\" = Gear28tPD + ClearanceDiameter"
equation "\"d18\" = WheelOD"
equation "\"d19\" = WheelClearance"
equation "\"Pulley48tPD\" = 45.8"
equation "\"Pulley19tPD\" = 18.2"
equation "\"Pulley16tPD\" = 15.3"
equation "\"Gear15tPD\" = 19.05"
equation "\"Gear35tPD\" = 44.45"
equation "\"Gear48tPD\" = 60.96"
equation "\"Gear28tPD\" = 35.56"
equation "\"BearingLargeOD\" = 28.575"
equation "\"BearingSmallOD\" = 22.225"
equation "\"MeshingClearance\" = 0.0508"
equation "\"CimOD\" = 63.5"
equation "\"WheelOD\" = 93.98"
equation "\"ClearanceDiameter\" = 7.62"
equation "\"WheelClearance\" = 101.6"
equation "\"TensioningBearingID\" = 6.35"
equation "\"TensioningBearingOD\" = 15.875"
equation "\"SpingClipClearance\" = 8.89"
equation "\"Pi\" = 79.79645"
equation "\"Pulley56tPD\" = 53.5"
equation "\"BearingXLargeOD\" = 34.925"
properties part number "OutlineSketch1" material "Aluminum 6061"
